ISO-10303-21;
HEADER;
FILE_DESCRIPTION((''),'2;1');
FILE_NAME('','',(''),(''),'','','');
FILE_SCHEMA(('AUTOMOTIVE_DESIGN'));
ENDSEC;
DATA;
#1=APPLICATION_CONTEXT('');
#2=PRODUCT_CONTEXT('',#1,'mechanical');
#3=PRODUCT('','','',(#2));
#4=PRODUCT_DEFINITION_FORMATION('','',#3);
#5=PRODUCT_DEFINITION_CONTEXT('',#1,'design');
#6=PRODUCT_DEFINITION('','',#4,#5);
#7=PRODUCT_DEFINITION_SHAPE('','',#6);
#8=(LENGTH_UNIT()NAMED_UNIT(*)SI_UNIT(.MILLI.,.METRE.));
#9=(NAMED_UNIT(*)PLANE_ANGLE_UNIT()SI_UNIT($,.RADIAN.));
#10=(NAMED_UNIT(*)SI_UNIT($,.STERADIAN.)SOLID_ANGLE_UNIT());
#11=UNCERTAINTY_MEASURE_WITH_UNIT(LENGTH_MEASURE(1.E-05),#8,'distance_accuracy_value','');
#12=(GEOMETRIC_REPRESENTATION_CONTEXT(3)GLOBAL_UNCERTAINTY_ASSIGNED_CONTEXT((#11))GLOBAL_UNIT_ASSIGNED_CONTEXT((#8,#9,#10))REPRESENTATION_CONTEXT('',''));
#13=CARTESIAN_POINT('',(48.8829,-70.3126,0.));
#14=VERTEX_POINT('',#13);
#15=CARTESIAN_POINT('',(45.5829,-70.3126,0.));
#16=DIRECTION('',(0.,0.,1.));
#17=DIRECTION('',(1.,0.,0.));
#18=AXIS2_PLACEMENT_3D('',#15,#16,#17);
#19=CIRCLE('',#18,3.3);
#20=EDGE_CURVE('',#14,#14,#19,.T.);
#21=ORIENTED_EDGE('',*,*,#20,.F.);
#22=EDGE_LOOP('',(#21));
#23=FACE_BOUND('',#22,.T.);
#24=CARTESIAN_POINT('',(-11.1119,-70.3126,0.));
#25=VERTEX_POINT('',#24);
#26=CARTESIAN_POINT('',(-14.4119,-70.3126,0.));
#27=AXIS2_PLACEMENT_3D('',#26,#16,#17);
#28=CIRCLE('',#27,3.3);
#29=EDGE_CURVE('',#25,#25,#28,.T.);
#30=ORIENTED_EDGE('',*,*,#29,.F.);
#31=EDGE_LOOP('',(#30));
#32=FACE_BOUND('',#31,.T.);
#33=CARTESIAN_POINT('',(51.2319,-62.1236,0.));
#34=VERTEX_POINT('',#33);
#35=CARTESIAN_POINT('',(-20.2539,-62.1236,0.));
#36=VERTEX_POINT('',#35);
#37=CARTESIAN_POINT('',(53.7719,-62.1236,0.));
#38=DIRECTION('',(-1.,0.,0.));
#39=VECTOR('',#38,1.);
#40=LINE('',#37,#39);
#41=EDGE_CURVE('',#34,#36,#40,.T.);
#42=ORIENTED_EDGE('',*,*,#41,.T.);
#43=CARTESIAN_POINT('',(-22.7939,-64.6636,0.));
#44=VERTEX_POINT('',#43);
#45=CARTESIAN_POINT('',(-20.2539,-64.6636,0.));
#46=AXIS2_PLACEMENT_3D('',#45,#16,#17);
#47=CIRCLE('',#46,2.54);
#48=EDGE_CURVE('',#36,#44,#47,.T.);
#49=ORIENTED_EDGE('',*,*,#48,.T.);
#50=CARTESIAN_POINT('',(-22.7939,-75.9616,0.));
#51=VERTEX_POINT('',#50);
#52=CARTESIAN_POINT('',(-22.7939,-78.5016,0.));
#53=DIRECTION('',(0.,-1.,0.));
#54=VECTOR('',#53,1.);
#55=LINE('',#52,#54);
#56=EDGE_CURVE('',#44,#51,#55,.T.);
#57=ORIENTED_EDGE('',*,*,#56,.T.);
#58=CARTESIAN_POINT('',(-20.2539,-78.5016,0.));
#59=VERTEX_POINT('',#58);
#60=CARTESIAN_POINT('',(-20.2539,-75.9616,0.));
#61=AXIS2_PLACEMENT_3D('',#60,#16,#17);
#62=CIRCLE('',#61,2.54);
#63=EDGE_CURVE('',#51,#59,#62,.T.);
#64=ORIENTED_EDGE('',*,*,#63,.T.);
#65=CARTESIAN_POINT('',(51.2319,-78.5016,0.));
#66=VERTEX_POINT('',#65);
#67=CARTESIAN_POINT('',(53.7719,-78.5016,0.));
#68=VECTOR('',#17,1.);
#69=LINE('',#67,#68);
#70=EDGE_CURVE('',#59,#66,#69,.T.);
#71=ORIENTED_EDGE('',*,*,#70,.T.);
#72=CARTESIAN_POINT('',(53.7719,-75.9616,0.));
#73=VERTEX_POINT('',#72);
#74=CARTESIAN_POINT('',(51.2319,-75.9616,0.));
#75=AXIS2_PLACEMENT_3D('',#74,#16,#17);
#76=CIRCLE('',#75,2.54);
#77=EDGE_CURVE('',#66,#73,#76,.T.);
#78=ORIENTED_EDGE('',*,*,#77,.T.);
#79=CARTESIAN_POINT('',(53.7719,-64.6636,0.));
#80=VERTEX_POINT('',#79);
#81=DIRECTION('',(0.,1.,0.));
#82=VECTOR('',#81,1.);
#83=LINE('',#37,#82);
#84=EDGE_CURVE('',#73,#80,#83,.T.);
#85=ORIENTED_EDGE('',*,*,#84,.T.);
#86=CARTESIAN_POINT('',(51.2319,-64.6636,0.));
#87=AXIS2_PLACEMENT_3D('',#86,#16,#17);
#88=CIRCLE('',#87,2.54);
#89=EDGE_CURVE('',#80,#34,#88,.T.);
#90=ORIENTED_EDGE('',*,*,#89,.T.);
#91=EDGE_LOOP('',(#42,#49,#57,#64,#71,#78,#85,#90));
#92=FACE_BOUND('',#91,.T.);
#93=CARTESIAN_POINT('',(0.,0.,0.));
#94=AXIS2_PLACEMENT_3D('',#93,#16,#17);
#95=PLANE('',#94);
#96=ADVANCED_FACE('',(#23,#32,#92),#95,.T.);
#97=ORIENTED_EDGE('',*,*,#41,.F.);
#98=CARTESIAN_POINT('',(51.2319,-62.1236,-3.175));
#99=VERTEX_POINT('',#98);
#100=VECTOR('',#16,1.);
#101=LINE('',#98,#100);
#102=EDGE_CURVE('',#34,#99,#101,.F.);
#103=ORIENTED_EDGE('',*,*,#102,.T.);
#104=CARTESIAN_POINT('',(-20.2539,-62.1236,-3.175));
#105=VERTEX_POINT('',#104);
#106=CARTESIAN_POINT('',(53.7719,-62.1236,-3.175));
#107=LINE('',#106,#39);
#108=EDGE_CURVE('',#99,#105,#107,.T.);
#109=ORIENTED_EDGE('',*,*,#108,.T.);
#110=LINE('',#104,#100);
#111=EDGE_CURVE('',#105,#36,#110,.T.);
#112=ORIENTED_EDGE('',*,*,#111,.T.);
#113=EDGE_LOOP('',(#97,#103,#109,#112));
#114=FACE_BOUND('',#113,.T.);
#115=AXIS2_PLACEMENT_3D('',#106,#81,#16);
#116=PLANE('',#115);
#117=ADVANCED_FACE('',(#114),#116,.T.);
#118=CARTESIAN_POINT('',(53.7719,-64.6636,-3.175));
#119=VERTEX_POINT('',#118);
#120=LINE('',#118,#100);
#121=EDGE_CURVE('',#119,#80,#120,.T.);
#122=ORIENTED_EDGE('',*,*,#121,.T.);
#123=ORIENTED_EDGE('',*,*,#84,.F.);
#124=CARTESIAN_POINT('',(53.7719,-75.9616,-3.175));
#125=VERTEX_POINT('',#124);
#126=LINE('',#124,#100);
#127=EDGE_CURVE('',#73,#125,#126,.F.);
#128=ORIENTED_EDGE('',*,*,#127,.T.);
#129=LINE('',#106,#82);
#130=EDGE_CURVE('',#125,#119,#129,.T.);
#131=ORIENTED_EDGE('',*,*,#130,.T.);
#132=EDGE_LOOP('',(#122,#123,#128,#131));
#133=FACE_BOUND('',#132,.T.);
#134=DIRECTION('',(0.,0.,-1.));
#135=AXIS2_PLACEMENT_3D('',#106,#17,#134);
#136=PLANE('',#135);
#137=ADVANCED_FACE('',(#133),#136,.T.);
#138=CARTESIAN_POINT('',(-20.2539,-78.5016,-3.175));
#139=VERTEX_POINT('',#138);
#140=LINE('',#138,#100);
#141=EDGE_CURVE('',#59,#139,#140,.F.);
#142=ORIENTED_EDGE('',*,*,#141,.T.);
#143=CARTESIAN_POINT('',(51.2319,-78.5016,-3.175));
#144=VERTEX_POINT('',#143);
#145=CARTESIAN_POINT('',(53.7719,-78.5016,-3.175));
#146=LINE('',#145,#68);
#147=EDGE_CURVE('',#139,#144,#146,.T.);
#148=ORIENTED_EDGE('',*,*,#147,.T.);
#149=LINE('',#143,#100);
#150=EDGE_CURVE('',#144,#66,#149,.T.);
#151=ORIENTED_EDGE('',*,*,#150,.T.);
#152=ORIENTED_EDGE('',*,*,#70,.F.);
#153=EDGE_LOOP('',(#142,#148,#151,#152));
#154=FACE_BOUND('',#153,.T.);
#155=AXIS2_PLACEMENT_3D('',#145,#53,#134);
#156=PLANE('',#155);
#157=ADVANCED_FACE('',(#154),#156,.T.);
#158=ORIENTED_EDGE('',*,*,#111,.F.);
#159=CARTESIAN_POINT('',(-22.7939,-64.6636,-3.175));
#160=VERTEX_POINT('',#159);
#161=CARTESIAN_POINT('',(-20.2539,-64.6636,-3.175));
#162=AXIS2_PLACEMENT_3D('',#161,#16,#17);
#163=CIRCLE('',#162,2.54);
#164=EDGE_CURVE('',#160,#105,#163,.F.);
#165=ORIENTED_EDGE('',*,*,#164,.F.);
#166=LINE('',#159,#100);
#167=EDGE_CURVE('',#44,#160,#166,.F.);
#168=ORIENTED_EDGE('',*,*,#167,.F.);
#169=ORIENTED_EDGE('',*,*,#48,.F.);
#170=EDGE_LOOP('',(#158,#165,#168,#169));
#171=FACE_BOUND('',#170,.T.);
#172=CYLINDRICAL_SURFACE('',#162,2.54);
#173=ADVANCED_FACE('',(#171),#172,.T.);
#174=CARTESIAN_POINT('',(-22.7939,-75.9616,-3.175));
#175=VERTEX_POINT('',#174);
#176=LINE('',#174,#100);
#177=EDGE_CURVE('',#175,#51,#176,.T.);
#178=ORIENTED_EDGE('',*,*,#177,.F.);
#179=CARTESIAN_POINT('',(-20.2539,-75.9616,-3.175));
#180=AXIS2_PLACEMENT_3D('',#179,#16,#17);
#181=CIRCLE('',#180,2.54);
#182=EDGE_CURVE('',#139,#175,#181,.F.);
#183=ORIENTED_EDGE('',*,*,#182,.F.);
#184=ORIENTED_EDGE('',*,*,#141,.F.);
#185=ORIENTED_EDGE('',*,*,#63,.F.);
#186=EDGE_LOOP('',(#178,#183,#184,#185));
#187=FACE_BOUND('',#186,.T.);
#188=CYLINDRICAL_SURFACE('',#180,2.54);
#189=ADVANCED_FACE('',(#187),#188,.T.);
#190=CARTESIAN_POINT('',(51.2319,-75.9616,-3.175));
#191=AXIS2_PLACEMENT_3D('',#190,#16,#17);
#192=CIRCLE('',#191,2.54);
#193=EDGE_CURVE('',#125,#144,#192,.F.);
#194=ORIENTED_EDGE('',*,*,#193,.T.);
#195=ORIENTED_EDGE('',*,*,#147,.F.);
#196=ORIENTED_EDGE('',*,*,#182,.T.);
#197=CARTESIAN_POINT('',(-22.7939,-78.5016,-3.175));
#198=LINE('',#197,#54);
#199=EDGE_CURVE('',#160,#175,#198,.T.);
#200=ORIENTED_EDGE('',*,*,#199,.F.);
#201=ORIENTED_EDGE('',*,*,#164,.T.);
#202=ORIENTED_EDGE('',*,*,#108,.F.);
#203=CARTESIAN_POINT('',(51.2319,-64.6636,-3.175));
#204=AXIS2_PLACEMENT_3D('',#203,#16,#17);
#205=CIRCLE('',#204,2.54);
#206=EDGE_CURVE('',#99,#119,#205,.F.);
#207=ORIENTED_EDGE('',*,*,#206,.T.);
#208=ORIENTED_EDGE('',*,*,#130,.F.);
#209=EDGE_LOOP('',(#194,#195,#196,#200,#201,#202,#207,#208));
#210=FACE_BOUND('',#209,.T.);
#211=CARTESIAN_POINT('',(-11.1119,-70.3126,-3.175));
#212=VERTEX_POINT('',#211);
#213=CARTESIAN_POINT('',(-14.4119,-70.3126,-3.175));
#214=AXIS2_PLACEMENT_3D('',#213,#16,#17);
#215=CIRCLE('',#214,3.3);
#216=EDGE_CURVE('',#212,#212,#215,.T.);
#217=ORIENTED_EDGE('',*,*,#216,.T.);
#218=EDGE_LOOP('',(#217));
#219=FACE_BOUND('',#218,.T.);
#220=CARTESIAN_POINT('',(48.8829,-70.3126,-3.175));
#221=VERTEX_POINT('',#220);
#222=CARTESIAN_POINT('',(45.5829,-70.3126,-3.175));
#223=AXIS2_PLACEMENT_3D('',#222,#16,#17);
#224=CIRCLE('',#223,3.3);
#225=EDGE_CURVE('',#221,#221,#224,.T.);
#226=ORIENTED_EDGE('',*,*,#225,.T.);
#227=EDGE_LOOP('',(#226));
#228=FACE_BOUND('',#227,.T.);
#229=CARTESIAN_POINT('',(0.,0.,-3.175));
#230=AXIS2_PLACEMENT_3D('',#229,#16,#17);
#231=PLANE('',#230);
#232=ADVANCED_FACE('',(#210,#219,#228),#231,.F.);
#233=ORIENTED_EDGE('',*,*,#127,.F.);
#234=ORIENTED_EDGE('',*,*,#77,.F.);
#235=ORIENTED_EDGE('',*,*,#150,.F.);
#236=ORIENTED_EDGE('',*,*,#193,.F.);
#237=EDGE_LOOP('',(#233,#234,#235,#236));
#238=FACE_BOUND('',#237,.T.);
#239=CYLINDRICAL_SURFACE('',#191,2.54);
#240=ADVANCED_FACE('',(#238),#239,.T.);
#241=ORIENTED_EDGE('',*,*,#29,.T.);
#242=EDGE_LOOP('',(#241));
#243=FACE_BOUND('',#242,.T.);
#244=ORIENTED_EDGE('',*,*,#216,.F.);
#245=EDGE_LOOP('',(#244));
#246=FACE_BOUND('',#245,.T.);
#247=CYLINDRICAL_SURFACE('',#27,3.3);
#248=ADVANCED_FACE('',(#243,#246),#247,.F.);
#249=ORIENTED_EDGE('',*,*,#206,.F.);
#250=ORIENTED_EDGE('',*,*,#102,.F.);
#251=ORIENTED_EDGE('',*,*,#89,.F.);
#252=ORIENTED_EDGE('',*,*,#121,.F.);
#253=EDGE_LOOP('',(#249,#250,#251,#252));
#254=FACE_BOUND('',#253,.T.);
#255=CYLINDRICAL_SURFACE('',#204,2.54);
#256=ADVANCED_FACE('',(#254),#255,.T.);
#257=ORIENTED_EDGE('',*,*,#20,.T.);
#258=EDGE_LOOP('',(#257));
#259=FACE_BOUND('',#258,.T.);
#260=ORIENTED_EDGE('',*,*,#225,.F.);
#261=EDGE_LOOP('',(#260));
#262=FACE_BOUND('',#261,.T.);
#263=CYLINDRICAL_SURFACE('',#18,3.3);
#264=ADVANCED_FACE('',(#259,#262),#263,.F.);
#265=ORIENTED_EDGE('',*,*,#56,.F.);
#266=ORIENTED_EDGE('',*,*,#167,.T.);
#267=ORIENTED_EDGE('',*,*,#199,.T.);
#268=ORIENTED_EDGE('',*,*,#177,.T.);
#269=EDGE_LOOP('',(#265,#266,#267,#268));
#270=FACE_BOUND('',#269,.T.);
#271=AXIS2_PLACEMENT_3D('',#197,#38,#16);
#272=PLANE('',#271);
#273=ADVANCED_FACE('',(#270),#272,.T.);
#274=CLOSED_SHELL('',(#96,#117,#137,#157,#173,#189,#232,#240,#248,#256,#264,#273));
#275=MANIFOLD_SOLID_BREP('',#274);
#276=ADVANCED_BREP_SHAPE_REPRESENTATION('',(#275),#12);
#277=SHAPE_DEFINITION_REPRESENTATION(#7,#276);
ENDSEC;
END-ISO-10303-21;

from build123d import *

# Parameters (mm, degrees)
SKETCH1_W            = 76.5658
SKETCH1_H            = 16.378
BASE_FLANGE1_DEPTH   = 3.175
M6_CLEARANCE_HOLE1_D = 6.6
FILLET1_R            = 2.54


# Sheet-metal steps are written as plain solids
with BuildPart() as part:
    # Sketch1 → Base-Flange1 (new body)
    with BuildSketch(Plane.XY):
        with Locations((15.489, -70.312600001)):
            Rectangle(SKETCH1_W, SKETCH1_H)
    extrude(amount=-BASE_FLANGE1_DEPTH)

    # M6 Clearance Hole1 (through all)
    with Locations(Plane.XY):
        with Locations((-14.4119, -70.312600001), (45.5829, -70.312600001)):
            Hole(M6_CLEARANCE_HOLE1_D / 2)

    # Fillet1
    fillet1_edges = [part.edges().sort_by_distance(p)[0] for p in [
        (-22.7939, -62.123600001, -1.5875),
        (53.7719, -62.123600001, -1.5875),
        (53.7719, -78.501600001, -1.5875),
        (-22.7939, -78.501600001, -1.5875),
    ]]
    fillet(fillet1_edges, radius=FILLET1_R)


solid = part.part
